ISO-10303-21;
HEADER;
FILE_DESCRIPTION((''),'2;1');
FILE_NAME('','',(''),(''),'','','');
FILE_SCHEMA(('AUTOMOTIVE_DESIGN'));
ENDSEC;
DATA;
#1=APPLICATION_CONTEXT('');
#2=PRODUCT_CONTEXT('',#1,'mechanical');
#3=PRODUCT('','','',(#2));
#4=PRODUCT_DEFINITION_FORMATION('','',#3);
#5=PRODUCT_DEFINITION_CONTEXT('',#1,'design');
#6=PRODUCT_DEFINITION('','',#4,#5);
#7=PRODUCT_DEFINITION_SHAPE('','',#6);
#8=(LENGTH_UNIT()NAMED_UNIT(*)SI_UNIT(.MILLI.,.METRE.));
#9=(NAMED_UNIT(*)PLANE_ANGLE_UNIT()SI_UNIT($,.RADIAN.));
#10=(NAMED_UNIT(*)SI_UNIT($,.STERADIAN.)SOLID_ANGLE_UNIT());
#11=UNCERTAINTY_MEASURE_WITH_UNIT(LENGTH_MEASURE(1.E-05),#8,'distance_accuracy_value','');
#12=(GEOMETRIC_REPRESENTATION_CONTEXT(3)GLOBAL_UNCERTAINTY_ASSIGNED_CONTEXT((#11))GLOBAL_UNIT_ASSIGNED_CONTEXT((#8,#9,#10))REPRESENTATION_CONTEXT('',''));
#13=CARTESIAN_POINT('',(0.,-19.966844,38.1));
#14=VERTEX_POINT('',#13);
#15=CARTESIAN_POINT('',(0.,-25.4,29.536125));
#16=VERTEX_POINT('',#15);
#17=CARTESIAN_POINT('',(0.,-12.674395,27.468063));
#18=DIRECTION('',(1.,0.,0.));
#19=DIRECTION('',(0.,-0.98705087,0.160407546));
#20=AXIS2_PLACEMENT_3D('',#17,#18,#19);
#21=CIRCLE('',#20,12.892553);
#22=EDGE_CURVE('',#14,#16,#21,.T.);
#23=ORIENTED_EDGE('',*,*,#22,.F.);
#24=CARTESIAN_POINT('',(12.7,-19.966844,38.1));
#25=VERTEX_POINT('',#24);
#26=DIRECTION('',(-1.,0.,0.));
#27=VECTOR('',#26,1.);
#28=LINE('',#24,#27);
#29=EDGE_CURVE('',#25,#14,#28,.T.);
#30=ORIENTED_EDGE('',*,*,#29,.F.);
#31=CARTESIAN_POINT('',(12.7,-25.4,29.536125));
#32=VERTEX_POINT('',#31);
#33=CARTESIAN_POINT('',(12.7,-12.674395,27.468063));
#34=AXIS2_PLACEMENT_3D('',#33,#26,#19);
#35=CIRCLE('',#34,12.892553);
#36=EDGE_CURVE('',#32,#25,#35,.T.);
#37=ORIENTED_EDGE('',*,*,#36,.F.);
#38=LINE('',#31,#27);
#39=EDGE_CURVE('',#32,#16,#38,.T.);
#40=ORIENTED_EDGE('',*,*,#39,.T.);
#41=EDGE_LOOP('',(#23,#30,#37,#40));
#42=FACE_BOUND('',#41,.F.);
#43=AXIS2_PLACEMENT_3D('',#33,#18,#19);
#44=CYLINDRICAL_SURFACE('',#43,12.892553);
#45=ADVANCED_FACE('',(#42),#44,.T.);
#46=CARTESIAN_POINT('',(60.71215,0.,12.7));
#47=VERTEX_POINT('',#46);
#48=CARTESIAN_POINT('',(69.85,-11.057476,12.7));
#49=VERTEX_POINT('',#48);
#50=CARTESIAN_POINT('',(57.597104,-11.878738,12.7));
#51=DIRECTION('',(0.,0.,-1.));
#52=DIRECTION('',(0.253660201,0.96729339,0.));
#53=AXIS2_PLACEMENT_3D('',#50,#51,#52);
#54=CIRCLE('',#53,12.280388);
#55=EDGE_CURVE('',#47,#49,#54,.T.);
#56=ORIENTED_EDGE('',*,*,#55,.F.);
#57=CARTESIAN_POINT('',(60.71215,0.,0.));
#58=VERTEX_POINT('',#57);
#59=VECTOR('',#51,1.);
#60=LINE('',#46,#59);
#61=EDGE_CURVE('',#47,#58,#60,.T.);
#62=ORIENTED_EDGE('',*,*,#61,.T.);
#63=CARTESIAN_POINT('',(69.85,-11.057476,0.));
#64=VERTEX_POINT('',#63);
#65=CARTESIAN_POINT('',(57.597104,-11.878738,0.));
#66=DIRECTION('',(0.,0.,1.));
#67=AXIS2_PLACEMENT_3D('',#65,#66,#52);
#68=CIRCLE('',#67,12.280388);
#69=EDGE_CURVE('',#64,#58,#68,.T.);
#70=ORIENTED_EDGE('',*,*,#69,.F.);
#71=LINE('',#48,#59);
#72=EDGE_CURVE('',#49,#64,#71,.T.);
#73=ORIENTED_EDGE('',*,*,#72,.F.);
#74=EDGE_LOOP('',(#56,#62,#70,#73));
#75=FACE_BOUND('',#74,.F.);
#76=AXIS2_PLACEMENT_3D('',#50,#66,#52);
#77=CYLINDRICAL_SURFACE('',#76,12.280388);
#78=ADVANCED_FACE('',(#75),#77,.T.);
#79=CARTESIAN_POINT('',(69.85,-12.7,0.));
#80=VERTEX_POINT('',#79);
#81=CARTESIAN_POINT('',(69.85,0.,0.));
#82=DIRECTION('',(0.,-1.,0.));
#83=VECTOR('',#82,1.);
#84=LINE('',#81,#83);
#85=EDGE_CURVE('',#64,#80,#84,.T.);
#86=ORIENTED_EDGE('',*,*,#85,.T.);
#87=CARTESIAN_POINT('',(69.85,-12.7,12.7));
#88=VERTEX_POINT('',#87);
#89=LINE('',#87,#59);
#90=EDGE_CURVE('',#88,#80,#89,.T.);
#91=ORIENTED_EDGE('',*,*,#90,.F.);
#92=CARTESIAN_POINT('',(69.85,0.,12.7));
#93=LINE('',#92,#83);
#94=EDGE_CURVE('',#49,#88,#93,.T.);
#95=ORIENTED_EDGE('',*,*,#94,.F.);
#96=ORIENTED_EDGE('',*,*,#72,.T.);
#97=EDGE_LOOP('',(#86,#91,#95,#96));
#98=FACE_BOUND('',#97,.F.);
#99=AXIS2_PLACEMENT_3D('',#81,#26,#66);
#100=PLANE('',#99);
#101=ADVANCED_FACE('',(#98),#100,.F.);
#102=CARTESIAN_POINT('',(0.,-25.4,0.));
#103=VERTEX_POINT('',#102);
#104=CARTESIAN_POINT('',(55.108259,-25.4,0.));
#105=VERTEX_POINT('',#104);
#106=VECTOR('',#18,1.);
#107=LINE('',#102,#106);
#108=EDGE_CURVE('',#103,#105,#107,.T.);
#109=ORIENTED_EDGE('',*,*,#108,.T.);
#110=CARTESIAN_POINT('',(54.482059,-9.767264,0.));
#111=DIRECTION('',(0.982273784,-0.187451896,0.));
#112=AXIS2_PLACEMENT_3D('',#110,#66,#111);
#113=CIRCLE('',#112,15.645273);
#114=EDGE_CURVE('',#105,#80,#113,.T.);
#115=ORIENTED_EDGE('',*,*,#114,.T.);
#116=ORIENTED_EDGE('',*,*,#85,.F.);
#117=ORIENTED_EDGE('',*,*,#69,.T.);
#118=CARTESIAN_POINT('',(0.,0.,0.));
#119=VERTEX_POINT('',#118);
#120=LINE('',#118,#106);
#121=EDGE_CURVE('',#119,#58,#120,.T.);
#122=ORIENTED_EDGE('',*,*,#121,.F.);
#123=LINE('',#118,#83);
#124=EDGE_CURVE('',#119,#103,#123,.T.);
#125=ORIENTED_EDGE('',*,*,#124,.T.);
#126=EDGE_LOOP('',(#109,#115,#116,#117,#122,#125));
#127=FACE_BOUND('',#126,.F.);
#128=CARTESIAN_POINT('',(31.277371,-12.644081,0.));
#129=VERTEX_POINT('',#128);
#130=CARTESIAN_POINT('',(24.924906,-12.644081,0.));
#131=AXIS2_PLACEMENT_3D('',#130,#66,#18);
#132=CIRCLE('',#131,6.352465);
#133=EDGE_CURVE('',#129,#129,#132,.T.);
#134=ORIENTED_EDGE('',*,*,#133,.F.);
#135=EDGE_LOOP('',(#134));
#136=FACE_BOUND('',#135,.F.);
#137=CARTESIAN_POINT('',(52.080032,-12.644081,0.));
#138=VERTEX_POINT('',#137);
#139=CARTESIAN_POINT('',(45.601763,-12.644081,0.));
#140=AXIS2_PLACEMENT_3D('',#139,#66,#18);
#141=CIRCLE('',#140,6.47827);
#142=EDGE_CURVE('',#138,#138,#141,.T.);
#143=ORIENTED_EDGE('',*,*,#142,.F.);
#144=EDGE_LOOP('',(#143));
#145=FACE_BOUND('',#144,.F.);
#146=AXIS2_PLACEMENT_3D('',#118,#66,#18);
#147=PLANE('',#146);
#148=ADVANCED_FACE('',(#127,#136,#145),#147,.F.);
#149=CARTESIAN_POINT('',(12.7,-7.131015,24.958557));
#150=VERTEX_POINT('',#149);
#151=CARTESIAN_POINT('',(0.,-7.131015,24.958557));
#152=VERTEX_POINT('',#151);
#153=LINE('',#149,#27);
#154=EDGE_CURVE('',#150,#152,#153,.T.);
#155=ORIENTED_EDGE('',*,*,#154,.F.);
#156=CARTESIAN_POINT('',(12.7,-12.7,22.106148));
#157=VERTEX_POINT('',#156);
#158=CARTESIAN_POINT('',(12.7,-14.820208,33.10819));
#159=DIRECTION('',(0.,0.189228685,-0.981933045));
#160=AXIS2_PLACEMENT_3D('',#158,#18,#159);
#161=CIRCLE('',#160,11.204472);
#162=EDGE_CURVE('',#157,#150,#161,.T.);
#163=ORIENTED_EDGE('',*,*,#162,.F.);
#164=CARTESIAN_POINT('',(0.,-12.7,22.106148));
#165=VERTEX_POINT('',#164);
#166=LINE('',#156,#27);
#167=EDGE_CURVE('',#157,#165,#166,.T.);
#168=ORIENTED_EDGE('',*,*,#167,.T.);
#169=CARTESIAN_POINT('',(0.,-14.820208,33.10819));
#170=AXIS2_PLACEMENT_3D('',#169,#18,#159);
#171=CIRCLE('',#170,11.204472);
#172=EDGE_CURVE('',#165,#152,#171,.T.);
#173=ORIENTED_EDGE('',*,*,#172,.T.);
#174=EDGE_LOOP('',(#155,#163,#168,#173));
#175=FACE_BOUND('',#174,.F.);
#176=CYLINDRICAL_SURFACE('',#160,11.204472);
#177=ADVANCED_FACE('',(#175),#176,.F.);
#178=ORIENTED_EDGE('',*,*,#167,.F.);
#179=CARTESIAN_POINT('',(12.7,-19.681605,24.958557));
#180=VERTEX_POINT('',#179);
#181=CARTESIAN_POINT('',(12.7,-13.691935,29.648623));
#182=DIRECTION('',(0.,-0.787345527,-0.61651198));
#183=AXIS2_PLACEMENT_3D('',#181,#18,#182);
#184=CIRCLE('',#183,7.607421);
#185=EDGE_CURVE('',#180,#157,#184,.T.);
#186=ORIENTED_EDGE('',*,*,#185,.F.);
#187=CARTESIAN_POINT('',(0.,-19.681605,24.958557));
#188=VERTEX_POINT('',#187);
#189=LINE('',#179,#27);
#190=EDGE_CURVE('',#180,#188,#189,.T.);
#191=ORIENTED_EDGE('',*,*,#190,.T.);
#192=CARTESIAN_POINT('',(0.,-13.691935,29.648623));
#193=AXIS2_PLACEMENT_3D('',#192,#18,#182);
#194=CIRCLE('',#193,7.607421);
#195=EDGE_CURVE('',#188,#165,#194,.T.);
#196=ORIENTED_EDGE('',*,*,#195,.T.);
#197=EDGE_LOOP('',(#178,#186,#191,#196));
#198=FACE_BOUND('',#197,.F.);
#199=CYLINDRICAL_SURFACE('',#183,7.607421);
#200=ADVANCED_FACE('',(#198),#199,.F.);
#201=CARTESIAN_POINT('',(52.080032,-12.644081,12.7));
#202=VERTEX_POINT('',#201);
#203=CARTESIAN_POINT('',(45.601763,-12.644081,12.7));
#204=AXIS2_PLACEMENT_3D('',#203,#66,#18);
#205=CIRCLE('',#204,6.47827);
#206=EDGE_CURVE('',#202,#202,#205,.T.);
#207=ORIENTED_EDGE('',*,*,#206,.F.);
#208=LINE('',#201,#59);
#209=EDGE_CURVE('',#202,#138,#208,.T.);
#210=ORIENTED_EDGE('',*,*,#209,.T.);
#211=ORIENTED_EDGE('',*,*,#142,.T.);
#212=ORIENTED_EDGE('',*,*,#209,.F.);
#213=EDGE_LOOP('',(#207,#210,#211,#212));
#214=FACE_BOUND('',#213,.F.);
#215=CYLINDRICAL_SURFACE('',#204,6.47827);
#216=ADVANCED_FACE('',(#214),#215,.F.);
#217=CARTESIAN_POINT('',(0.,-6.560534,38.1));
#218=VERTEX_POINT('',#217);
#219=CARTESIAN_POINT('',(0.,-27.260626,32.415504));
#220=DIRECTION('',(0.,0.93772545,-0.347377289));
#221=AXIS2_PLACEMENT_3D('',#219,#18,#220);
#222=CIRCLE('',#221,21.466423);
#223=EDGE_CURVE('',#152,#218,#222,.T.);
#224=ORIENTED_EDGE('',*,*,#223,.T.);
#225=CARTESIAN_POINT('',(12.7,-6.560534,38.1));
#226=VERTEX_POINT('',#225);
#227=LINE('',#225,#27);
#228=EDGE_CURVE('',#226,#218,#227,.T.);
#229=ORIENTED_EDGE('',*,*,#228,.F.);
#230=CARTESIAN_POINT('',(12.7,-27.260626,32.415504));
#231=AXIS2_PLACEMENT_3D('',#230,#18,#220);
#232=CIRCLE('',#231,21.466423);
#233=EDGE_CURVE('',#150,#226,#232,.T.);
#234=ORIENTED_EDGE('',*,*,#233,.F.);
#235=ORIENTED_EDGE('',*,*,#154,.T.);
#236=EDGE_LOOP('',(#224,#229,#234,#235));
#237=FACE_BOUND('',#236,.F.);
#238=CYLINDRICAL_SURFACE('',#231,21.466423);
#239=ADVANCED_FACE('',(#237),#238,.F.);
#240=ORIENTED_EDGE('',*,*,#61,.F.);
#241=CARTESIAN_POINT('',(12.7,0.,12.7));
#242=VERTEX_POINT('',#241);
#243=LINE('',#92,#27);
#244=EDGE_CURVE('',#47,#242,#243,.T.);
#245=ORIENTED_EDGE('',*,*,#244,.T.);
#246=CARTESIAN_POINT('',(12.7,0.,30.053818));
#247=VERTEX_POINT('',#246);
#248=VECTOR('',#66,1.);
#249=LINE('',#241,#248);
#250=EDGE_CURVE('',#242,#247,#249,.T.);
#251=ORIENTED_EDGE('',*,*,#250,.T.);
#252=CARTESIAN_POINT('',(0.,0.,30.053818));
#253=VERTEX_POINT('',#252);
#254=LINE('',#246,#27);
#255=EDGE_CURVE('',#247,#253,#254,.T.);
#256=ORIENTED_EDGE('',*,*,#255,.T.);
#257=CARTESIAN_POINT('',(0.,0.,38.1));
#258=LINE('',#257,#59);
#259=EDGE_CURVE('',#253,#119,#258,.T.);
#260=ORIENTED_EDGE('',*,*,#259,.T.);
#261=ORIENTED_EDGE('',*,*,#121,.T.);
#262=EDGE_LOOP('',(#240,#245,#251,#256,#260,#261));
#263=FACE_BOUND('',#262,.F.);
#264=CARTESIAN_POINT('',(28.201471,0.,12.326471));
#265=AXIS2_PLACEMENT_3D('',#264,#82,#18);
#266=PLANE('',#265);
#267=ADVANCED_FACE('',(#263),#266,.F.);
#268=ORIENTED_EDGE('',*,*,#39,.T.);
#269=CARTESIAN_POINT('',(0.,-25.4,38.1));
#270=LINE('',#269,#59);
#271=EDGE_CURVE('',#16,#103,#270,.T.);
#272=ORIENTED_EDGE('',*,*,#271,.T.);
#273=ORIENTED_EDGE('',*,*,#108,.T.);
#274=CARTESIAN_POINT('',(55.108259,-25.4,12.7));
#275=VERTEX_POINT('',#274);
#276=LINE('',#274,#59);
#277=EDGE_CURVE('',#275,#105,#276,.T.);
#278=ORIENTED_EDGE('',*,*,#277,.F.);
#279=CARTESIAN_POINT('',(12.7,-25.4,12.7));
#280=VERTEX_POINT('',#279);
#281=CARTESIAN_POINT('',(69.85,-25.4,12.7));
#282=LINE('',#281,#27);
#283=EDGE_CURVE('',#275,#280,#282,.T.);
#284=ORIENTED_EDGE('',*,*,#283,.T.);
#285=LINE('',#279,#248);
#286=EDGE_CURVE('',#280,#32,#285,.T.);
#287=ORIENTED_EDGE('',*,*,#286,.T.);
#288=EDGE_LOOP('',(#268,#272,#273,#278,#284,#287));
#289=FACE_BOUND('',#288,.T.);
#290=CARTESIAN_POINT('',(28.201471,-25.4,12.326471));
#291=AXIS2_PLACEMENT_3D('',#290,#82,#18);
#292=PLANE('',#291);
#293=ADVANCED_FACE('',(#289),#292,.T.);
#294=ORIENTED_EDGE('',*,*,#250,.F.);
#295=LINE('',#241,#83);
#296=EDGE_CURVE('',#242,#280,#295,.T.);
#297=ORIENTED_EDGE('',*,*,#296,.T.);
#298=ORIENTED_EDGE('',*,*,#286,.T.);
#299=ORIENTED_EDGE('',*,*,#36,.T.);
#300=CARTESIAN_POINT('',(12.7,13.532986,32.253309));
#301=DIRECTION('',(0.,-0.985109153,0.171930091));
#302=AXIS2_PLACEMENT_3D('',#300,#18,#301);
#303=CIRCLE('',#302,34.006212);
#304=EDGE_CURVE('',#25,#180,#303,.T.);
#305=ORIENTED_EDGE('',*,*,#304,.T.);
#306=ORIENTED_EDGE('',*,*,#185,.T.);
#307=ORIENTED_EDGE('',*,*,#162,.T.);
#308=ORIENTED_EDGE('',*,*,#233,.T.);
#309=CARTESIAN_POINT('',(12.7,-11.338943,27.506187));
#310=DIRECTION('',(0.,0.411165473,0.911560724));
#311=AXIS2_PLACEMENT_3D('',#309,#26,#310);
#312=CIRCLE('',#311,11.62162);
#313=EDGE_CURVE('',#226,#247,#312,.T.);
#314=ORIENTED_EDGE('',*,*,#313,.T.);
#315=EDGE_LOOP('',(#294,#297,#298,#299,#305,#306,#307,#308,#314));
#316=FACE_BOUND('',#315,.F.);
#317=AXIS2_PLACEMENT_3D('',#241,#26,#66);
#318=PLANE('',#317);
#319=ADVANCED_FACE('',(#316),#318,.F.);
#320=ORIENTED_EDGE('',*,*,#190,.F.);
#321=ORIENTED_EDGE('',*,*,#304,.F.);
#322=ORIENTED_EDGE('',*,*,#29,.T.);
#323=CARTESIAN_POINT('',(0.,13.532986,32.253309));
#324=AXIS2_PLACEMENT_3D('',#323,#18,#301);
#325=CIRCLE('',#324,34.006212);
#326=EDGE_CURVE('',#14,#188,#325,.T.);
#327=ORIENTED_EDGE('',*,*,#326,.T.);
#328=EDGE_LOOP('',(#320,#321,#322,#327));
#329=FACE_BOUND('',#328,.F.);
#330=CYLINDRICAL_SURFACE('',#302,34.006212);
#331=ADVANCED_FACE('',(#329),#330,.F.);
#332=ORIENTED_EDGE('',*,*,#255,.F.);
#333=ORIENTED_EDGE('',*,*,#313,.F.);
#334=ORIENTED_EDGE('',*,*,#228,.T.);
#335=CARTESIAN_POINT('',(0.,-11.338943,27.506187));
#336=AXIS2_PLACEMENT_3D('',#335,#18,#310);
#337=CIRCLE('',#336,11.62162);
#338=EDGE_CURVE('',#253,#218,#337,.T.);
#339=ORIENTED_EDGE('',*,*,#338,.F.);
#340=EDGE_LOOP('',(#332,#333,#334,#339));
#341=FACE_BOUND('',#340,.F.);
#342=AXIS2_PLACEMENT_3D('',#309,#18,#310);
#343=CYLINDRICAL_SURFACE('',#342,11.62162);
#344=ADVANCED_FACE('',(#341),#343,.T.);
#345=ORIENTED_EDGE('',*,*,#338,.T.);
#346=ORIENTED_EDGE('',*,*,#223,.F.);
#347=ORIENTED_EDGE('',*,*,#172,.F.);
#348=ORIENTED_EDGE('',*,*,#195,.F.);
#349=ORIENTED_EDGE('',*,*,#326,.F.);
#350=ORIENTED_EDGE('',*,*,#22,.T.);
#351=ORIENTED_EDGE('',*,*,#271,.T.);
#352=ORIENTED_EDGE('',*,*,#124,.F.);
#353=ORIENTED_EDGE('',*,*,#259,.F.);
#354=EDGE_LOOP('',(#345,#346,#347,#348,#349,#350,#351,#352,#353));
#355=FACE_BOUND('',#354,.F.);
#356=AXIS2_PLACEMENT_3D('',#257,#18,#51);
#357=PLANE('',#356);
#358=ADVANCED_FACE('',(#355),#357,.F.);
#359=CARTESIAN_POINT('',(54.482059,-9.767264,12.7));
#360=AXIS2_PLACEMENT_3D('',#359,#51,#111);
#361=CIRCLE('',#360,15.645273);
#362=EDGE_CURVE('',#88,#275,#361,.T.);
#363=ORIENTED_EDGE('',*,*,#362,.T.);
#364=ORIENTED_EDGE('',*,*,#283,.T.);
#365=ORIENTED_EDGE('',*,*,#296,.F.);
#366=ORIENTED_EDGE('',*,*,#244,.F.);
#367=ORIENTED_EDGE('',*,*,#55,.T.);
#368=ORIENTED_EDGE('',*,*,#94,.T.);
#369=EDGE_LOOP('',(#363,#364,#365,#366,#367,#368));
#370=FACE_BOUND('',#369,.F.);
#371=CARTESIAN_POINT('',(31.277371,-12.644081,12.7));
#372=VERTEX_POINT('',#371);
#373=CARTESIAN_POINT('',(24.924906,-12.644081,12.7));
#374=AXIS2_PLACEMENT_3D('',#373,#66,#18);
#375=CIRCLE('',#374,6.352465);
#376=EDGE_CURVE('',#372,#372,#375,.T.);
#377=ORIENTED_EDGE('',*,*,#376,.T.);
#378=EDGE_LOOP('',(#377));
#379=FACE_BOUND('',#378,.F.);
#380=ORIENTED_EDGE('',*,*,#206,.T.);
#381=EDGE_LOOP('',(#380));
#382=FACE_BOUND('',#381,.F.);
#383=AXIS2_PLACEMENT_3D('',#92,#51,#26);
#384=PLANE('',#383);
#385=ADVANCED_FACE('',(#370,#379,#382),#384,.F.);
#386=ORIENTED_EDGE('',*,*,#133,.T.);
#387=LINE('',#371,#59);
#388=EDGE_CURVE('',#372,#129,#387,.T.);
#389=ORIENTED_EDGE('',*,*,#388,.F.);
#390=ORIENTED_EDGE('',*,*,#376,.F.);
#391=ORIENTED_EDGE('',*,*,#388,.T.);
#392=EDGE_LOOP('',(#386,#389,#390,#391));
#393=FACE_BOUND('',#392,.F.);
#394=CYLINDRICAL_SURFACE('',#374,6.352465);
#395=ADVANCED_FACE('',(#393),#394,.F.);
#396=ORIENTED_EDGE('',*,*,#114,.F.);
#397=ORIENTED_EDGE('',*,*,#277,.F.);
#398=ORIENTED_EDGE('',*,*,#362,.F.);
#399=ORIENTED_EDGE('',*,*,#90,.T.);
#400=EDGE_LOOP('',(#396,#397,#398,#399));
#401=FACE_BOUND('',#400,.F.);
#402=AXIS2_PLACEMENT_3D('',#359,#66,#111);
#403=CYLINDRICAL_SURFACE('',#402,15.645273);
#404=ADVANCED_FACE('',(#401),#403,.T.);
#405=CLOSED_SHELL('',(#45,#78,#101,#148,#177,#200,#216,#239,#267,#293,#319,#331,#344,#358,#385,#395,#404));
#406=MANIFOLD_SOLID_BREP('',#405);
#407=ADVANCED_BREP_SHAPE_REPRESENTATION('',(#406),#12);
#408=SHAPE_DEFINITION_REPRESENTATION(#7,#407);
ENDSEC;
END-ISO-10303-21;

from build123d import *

# Parameters (mm, degrees)
F1_DEPTH = 25.4
F3_DEPTH = 25.4
F5_DEPTH = 25.4
F7_DEPTH = 25.4
F8_R     = 6.3524650116
F8_R_2   = 6.4782695501
F9_DEPTH = 25.4


with BuildPart() as f1:
    # F0 (on Front) → F1 (new body)
    with BuildSketch(Plane.XZ):
        Polygon((0, 38.1), (0, 0), (69.85, 0), (69.85, 12.7), (12.7, 12.7), (12.7, 38.1), align=None)
    extrude(amount=F1_DEPTH)

    # F2 (on face) → F3 (cut)
    with BuildSketch(Plane.XY.offset(12.7)):
        with BuildLine():
            ThreePointArc((69.85, -12.7), (64.6936030033, -21.620488158), (55.1082585024, -25.4))
            Line((55.1082585024, -25.4), (69.85, -25.4))
            Line((69.85, -25.4), (69.85, -12.7))
        make_face()
        with BuildLine():
            ThreePointArc((60.7121499118, 0), (67.063378566, -4.0558500097), (69.85, -11.0574759425))
            Line((69.85, -11.0574759425), (69.85, 0))
            Line((69.85, 0), (60.7121499118, 0))
        make_face()
    extrude(amount=-F3_DEPTH, mode=Mode.SUBTRACT)

    # F4 (on face) → F5 (cut)
    with BuildSketch(Plane.YZ.offset(12.7)):
        with BuildLine():
            ThreePointArc((-12.7, 22.1061483026), (-9.7123568594, 23.1357247682), (-7.1310154162, 24.958556518))
            ThreePointArc((-7.1310154162, 24.958556518), (-5.8144018077, 31.4845054838), (-6.5605342388, 38.1))
            Line((-6.5605342388, 38.1), (-19.9668444693, 38.1))
            ThreePointArc((-19.9668444693, 38.1), (-20.4652180352, 31.5153652578), (-19.6816045791, 24.958556518))
            ThreePointArc((-19.6816045791, 24.958556518), (-16.5691552263, 22.6062890993), (-12.7, 22.1061483026))
        make_face()
    extrude(amount=-F5_DEPTH, mode=Mode.SUBTRACT)

    # F6 (on face) → F7 (cut)
    with BuildSketch(Plane.YZ.offset(12.7)):
        with BuildLine():
            ThreePointArc((-25.4, 29.5361254617), (-23.5608826076, 34.3747475185), (-19.9668444693, 38.1))
            Line((-19.9668444693, 38.1), (-25.4, 38.1))
            Line((-25.4, 38.1), (-25.4, 29.5361254617))
        make_face()
        with BuildLine():
            Line((0, 38.1), (-6.5605342388, 38.1))
            ThreePointArc((-6.5605342388, 38.1), (-2.3318615541, 34.8502011083), (0, 30.0538183876))
            Line((0, 30.0538183876), (0, 38.1))
        make_face()
    extrude(amount=-F7_DEPTH, mode=Mode.SUBTRACT)

    # F8 (on face) → F9 (cut)
    with BuildSketch(Plane.XY.offset(12.7)):
        with Locations((24.9249059707, -12.6440813765)):
            Circle(F8_R)
        with Locations((45.6017628312, -12.6440813765)):
            Circle(F8_R_2)
    extrude(amount=-F9_DEPTH, mode=Mode.SUBTRACT)


solid = f1.part
